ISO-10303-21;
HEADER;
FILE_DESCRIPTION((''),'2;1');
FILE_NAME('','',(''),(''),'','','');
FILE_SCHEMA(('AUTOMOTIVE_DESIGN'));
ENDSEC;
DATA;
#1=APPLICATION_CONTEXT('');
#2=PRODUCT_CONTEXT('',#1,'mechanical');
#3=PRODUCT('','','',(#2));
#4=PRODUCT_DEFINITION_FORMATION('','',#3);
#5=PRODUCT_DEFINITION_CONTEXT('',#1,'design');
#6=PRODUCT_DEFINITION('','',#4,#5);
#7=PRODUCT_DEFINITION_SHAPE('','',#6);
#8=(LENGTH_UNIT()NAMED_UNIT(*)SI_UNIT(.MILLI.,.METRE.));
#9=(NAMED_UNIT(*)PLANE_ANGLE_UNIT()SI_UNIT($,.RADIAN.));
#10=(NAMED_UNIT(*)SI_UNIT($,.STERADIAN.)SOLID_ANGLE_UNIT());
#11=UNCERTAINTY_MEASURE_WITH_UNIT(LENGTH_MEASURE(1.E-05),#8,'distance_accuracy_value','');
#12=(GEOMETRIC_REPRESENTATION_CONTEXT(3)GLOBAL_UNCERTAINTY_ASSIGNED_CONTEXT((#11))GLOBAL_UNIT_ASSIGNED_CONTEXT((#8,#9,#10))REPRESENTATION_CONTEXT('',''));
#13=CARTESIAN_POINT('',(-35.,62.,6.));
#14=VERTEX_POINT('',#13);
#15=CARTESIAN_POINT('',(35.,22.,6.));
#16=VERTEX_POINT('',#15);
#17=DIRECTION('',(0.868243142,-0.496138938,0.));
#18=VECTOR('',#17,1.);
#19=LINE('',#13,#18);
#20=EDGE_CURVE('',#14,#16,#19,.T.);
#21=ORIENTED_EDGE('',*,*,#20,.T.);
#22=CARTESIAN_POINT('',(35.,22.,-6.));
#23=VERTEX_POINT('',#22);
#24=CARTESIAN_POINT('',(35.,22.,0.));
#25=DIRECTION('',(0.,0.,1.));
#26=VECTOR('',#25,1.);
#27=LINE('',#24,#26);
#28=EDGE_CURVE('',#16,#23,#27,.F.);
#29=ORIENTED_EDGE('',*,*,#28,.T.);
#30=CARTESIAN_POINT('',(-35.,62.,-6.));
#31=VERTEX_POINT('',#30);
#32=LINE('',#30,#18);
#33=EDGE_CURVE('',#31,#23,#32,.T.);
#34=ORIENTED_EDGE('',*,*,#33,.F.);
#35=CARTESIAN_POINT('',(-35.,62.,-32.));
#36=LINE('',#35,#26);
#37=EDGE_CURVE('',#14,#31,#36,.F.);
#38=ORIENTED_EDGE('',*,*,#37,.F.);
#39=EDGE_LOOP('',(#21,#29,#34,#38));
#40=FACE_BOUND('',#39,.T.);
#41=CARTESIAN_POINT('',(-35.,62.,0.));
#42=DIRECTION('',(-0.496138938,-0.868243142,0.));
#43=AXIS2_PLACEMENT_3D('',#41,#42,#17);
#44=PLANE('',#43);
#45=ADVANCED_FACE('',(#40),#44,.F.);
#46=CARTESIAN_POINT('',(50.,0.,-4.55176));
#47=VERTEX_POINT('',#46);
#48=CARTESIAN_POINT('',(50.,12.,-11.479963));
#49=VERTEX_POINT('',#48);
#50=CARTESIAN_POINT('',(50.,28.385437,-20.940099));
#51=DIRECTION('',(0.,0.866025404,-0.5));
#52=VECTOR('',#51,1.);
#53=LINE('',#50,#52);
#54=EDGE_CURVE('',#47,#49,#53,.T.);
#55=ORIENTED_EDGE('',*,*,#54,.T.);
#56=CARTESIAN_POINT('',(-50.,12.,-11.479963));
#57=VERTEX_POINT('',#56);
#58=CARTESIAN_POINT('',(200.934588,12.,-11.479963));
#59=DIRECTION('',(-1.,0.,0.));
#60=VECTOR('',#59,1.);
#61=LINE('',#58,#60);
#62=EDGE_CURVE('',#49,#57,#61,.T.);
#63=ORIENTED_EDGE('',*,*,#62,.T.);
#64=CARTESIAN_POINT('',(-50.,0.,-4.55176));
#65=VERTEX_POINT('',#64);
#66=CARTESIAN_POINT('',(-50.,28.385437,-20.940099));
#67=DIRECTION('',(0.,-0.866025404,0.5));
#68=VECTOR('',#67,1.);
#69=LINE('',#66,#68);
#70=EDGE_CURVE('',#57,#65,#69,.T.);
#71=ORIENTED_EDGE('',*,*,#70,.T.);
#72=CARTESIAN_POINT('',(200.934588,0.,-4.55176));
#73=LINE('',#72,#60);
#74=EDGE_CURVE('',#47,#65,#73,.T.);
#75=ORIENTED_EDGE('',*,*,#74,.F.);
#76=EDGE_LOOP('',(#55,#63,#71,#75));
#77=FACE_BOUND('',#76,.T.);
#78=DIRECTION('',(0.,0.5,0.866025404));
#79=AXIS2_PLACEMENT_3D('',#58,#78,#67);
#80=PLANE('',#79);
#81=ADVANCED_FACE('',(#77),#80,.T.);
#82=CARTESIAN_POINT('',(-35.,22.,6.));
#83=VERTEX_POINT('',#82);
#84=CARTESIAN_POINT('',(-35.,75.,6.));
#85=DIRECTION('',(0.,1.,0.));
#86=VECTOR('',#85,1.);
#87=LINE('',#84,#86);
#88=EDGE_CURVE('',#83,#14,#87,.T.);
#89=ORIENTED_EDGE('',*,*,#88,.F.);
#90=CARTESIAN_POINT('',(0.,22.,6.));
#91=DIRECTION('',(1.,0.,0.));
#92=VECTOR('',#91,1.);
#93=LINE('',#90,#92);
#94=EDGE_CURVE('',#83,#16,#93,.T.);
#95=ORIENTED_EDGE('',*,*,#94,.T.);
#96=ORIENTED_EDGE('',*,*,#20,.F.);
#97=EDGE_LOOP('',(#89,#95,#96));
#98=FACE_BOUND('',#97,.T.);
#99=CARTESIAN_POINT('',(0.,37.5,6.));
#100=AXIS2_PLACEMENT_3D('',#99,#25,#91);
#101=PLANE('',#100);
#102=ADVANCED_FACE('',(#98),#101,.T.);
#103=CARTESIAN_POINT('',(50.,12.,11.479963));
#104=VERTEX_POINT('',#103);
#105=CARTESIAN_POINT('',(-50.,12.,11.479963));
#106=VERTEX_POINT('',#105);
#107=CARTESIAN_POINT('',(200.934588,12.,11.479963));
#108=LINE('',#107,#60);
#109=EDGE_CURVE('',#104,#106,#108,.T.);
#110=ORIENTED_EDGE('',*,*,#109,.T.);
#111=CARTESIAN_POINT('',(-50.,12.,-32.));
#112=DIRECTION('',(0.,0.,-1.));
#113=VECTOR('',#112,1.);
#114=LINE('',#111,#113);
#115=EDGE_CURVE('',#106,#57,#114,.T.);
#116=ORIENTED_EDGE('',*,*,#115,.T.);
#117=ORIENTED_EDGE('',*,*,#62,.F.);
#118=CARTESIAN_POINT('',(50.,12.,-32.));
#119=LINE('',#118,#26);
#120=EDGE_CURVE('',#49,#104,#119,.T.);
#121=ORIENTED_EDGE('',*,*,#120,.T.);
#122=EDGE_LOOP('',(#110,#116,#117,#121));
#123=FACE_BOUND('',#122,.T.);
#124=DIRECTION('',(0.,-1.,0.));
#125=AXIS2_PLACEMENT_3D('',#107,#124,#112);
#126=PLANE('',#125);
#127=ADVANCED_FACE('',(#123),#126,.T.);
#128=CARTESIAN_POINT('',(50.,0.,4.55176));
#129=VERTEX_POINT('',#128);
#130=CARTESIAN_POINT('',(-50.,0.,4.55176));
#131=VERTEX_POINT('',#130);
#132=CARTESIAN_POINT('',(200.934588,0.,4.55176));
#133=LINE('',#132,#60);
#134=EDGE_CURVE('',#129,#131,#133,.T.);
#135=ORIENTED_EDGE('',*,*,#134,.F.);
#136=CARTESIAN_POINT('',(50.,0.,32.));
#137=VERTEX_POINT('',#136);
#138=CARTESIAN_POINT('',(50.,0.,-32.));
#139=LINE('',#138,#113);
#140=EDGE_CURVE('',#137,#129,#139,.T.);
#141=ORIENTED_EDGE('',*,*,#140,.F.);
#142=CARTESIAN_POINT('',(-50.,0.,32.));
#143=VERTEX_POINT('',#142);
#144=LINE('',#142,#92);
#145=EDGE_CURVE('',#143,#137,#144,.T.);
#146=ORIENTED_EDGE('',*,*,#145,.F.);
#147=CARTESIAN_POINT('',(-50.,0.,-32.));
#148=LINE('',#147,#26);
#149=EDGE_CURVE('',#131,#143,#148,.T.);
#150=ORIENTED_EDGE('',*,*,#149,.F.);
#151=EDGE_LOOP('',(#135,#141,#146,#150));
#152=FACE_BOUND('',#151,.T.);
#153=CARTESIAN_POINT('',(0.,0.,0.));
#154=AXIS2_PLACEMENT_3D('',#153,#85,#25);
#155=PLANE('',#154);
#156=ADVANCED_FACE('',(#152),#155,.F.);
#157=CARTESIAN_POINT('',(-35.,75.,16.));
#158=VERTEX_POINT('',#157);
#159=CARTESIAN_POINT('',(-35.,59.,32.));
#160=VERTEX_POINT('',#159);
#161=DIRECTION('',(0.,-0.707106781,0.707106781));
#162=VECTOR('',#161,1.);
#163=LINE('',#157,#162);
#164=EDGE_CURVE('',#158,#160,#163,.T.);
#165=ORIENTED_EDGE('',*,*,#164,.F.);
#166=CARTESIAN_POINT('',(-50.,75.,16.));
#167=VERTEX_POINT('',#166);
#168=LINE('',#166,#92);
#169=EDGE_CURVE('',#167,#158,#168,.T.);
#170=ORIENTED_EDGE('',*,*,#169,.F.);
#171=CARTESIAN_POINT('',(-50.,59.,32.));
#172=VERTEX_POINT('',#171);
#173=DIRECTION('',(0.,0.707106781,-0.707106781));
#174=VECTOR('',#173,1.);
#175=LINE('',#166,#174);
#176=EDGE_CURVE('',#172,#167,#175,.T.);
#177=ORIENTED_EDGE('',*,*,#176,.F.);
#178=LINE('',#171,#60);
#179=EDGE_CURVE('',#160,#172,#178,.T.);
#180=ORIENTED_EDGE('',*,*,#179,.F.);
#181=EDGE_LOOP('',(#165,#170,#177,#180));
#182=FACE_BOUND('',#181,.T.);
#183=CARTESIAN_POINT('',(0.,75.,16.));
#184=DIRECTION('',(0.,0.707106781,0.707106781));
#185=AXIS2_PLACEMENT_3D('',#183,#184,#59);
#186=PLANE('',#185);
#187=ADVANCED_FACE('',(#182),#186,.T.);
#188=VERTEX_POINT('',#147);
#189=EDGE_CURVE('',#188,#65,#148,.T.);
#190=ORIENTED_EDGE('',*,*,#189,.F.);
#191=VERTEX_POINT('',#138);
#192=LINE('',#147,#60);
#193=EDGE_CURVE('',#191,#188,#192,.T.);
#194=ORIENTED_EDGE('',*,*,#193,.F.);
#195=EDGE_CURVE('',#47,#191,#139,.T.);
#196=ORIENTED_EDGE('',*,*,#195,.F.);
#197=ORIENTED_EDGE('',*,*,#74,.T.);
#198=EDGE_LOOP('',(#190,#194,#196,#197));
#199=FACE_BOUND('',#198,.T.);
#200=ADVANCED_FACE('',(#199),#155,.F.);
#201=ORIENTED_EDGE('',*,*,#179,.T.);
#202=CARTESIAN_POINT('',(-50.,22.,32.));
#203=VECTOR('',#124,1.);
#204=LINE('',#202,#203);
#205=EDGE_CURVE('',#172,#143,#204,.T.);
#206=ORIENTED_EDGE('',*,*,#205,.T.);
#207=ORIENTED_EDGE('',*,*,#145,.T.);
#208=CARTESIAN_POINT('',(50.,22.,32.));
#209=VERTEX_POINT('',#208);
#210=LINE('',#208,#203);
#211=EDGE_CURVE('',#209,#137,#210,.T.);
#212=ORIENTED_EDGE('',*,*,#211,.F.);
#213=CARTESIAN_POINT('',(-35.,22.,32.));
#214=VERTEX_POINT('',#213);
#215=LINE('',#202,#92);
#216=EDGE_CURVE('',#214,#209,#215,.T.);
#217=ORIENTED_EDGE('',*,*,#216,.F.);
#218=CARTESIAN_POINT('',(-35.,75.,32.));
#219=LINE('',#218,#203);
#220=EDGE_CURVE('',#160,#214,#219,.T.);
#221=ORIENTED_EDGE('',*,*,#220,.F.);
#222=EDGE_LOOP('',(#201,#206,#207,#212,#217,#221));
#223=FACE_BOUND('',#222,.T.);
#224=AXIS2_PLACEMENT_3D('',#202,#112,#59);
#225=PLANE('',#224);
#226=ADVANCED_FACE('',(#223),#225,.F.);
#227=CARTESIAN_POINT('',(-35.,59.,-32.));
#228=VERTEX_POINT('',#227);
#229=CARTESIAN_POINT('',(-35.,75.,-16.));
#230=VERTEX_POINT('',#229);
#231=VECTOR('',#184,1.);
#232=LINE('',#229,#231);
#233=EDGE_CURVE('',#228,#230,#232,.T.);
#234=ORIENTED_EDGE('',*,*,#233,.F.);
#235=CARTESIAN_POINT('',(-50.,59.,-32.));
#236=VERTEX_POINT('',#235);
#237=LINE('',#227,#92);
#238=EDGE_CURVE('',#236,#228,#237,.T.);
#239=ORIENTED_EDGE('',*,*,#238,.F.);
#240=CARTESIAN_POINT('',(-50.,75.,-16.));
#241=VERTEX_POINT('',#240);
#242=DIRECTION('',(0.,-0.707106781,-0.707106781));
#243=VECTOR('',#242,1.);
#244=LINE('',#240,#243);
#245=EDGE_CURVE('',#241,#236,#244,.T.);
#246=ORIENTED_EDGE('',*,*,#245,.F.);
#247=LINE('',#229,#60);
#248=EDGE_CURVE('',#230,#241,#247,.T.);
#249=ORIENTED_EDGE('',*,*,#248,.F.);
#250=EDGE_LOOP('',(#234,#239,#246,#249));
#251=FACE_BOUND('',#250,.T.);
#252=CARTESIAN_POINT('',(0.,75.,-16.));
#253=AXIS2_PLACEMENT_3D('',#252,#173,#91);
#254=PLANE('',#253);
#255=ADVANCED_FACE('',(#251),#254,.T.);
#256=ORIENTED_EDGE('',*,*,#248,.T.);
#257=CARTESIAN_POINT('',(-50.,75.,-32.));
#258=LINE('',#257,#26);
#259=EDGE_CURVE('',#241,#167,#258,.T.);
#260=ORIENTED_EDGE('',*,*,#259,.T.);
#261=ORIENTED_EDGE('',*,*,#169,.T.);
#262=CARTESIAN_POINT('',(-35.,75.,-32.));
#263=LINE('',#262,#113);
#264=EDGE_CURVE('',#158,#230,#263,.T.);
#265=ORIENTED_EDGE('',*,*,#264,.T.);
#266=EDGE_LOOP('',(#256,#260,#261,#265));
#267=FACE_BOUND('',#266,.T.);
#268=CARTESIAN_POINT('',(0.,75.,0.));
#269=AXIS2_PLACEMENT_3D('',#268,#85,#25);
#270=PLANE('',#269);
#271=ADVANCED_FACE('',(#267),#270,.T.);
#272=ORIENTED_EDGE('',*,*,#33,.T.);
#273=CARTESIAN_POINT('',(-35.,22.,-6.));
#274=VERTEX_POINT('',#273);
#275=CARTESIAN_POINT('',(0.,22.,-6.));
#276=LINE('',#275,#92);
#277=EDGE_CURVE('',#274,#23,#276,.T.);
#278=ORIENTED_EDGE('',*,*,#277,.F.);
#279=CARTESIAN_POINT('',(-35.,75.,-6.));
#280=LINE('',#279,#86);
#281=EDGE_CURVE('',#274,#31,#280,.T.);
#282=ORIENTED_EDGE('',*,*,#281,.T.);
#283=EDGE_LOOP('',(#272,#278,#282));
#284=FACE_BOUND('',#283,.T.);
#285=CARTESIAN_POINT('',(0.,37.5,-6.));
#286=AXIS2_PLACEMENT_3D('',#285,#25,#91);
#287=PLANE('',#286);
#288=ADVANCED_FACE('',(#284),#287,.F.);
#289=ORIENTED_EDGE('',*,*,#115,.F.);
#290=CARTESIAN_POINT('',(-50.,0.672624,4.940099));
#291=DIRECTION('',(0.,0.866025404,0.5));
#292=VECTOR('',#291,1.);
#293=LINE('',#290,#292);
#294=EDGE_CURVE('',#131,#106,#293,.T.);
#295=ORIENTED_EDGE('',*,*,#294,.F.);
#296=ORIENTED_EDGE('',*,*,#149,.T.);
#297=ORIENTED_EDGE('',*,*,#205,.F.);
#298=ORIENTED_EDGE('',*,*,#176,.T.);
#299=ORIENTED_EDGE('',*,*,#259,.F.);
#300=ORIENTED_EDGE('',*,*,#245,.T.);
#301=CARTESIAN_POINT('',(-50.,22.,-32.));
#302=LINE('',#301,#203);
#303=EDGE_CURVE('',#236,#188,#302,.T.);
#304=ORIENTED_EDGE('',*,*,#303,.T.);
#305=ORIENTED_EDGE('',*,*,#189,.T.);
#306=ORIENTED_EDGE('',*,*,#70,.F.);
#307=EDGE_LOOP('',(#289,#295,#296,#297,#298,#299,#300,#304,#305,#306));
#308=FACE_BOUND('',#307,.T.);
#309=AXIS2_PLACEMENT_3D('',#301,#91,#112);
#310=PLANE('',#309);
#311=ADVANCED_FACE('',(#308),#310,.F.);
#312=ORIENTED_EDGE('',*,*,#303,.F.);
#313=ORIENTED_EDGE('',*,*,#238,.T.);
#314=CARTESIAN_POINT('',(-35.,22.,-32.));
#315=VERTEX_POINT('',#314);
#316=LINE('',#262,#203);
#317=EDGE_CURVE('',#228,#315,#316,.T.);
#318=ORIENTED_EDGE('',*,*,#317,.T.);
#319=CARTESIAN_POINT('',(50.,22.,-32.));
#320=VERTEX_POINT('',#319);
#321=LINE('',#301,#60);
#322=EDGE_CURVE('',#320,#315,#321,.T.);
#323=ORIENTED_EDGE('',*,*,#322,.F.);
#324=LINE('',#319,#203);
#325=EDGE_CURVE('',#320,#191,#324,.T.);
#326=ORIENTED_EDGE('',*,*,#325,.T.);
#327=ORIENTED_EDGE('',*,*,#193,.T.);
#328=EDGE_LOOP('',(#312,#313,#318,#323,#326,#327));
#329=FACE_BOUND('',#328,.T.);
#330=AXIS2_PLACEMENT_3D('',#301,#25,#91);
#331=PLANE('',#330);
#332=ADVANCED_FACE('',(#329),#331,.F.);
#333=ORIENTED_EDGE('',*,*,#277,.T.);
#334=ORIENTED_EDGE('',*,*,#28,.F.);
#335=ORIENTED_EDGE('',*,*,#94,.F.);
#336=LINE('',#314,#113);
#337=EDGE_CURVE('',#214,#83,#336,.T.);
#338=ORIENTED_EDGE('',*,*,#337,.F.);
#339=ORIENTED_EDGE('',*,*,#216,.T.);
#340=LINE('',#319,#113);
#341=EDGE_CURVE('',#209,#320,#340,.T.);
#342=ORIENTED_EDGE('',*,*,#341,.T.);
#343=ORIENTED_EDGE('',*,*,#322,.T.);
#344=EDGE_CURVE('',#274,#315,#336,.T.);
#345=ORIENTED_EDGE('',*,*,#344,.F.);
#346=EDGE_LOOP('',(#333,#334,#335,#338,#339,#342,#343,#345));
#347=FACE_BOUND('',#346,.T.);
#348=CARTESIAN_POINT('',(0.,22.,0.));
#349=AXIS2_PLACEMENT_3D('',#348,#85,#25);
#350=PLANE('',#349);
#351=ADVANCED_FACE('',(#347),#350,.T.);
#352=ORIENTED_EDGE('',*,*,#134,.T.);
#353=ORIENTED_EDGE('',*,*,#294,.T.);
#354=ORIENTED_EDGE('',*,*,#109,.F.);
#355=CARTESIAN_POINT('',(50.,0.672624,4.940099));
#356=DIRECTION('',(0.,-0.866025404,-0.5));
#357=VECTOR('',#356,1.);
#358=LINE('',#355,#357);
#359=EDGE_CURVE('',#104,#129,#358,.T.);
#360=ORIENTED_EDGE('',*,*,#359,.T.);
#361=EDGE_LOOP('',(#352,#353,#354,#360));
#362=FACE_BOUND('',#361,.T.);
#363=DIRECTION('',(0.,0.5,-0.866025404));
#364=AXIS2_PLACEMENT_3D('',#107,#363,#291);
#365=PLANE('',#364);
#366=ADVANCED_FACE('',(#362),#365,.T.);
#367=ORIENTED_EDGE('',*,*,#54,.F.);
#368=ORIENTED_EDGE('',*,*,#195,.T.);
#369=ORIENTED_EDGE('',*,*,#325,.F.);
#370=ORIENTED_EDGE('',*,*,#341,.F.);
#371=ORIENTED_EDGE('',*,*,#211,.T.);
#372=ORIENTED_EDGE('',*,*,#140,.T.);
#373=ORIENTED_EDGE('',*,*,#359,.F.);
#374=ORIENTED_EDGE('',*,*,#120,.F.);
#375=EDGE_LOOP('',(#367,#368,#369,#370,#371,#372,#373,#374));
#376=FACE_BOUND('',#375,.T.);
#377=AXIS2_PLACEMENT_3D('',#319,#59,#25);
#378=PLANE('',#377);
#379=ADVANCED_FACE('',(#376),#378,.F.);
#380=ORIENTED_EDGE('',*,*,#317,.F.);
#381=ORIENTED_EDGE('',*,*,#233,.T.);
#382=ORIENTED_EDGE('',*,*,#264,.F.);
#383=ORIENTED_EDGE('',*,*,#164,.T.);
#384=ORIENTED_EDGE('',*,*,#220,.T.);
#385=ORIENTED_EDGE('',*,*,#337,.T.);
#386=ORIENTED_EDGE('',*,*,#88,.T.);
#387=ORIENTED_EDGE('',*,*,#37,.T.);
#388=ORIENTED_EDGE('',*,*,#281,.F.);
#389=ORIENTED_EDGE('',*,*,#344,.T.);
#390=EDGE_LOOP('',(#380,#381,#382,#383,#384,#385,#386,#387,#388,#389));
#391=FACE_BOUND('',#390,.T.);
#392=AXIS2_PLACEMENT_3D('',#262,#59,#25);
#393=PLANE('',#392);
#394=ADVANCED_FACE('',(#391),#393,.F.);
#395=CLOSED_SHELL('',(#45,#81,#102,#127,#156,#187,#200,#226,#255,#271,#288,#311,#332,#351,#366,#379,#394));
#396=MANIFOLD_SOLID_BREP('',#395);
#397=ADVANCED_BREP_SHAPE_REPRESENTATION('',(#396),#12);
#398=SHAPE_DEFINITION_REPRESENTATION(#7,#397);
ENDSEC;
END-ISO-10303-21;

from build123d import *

# Parameters (mm, degrees)
SKETCH1_W               = 100
SKETCH1_H               = 64
BOSS_EXTRUDE1_DEPTH     = 22
CUT_EXTRUDE1_DEPTH      = 108.275346655
CUT_EXTRUDE1_DEPTH_BACK = 108.275346655
SKETCH4_W               = 15
SKETCH4_H               = 64
BOSS_EXTRUDE2_DEPTH     = 53
CHAMFER1_SIZE           = 16
CHAMFER2_SIZE           = 16
RIB1_REACH              = 97.65
SKETCH5_WALL_W          = 273.923387726
SKETCH5_WALL_H          = 12


with BuildPart() as part:
    # Sketch1 → Boss-Extrude1 (new body)
    with BuildSketch(Plane(origin=(0, 0, 0), x_dir=(1, 0, 0), z_dir=(0, 1, 0))):
        Rectangle(SKETCH1_W, SKETCH1_H)
    extrude(amount=BOSS_EXTRUDE1_DEPTH)

    # Sketch2 → Cut-Extrude1 (cut, two sides: drawn at the far end of the back side and taken through both)
    with BuildSketch(Plane(origin=(50, 0, 0), x_dir=(0, 0, -1), z_dir=(1, 0, 0)).offset(-CUT_EXTRUDE1_DEPTH_BACK)):
        Polygon((-43.110063235, -82.552699055), (4.551759787, 0), (11.479963017, 12), (-11.479963017, 12), (-4.551759787, 0), (43.110063235, -82.552699055), (43.110063235, 108.094593032), (-43.110063235, 108.094593032), align=None)
    extrude(amount=CUT_EXTRUDE1_DEPTH + CUT_EXTRUDE1_DEPTH_BACK, mode=Mode.SUBTRACT)

    # Sketch4 → Boss-Extrude2 (add)
    with BuildSketch(Plane(origin=(0, 22, 0), x_dir=(1, 0, 0), z_dir=(0, 1, 0))):
        with Locations((-42.5, 0)):
            Rectangle(SKETCH4_W, SKETCH4_H)
    extrude(amount=BOSS_EXTRUDE2_DEPTH)

    # Chamfer1
    chamfer1_edges = [part.edges().sort_by_distance(p)[0] for p in [
        (-42.5, 75, 32),
    ]]
    chamfer(chamfer1_edges, length=CHAMFER1_SIZE)

    # Chamfer2
    chamfer2_edges = [part.edges().sort_by_distance(p)[0] for p in [
        (-42.5, 75, -32),
    ]]
    chamfer(chamfer2_edges, length=CHAMFER2_SIZE)

    # Sketch5 wall → Rib1 (add, up to next)
    with BuildSketch(Plane(origin=(0, 42, 0), x_dir=(0.868243142124, -0.496138938357, 0), z_dir=(0.496138938357, 0.868243142124, 0)), mode=Mode.PRIVATE) as rib1_sk1:
        Rectangle(SKETCH5_WALL_W, SKETCH5_WALL_H)
    rib1_tool1 = extrude(rib1_sk1.sketch, amount=-RIB1_REACH, mode=Mode.PRIVATE) - part.part
    add(rib1_tool1.solids().sort_by_distance((0, 42, 0))[0])


solid = part.part
